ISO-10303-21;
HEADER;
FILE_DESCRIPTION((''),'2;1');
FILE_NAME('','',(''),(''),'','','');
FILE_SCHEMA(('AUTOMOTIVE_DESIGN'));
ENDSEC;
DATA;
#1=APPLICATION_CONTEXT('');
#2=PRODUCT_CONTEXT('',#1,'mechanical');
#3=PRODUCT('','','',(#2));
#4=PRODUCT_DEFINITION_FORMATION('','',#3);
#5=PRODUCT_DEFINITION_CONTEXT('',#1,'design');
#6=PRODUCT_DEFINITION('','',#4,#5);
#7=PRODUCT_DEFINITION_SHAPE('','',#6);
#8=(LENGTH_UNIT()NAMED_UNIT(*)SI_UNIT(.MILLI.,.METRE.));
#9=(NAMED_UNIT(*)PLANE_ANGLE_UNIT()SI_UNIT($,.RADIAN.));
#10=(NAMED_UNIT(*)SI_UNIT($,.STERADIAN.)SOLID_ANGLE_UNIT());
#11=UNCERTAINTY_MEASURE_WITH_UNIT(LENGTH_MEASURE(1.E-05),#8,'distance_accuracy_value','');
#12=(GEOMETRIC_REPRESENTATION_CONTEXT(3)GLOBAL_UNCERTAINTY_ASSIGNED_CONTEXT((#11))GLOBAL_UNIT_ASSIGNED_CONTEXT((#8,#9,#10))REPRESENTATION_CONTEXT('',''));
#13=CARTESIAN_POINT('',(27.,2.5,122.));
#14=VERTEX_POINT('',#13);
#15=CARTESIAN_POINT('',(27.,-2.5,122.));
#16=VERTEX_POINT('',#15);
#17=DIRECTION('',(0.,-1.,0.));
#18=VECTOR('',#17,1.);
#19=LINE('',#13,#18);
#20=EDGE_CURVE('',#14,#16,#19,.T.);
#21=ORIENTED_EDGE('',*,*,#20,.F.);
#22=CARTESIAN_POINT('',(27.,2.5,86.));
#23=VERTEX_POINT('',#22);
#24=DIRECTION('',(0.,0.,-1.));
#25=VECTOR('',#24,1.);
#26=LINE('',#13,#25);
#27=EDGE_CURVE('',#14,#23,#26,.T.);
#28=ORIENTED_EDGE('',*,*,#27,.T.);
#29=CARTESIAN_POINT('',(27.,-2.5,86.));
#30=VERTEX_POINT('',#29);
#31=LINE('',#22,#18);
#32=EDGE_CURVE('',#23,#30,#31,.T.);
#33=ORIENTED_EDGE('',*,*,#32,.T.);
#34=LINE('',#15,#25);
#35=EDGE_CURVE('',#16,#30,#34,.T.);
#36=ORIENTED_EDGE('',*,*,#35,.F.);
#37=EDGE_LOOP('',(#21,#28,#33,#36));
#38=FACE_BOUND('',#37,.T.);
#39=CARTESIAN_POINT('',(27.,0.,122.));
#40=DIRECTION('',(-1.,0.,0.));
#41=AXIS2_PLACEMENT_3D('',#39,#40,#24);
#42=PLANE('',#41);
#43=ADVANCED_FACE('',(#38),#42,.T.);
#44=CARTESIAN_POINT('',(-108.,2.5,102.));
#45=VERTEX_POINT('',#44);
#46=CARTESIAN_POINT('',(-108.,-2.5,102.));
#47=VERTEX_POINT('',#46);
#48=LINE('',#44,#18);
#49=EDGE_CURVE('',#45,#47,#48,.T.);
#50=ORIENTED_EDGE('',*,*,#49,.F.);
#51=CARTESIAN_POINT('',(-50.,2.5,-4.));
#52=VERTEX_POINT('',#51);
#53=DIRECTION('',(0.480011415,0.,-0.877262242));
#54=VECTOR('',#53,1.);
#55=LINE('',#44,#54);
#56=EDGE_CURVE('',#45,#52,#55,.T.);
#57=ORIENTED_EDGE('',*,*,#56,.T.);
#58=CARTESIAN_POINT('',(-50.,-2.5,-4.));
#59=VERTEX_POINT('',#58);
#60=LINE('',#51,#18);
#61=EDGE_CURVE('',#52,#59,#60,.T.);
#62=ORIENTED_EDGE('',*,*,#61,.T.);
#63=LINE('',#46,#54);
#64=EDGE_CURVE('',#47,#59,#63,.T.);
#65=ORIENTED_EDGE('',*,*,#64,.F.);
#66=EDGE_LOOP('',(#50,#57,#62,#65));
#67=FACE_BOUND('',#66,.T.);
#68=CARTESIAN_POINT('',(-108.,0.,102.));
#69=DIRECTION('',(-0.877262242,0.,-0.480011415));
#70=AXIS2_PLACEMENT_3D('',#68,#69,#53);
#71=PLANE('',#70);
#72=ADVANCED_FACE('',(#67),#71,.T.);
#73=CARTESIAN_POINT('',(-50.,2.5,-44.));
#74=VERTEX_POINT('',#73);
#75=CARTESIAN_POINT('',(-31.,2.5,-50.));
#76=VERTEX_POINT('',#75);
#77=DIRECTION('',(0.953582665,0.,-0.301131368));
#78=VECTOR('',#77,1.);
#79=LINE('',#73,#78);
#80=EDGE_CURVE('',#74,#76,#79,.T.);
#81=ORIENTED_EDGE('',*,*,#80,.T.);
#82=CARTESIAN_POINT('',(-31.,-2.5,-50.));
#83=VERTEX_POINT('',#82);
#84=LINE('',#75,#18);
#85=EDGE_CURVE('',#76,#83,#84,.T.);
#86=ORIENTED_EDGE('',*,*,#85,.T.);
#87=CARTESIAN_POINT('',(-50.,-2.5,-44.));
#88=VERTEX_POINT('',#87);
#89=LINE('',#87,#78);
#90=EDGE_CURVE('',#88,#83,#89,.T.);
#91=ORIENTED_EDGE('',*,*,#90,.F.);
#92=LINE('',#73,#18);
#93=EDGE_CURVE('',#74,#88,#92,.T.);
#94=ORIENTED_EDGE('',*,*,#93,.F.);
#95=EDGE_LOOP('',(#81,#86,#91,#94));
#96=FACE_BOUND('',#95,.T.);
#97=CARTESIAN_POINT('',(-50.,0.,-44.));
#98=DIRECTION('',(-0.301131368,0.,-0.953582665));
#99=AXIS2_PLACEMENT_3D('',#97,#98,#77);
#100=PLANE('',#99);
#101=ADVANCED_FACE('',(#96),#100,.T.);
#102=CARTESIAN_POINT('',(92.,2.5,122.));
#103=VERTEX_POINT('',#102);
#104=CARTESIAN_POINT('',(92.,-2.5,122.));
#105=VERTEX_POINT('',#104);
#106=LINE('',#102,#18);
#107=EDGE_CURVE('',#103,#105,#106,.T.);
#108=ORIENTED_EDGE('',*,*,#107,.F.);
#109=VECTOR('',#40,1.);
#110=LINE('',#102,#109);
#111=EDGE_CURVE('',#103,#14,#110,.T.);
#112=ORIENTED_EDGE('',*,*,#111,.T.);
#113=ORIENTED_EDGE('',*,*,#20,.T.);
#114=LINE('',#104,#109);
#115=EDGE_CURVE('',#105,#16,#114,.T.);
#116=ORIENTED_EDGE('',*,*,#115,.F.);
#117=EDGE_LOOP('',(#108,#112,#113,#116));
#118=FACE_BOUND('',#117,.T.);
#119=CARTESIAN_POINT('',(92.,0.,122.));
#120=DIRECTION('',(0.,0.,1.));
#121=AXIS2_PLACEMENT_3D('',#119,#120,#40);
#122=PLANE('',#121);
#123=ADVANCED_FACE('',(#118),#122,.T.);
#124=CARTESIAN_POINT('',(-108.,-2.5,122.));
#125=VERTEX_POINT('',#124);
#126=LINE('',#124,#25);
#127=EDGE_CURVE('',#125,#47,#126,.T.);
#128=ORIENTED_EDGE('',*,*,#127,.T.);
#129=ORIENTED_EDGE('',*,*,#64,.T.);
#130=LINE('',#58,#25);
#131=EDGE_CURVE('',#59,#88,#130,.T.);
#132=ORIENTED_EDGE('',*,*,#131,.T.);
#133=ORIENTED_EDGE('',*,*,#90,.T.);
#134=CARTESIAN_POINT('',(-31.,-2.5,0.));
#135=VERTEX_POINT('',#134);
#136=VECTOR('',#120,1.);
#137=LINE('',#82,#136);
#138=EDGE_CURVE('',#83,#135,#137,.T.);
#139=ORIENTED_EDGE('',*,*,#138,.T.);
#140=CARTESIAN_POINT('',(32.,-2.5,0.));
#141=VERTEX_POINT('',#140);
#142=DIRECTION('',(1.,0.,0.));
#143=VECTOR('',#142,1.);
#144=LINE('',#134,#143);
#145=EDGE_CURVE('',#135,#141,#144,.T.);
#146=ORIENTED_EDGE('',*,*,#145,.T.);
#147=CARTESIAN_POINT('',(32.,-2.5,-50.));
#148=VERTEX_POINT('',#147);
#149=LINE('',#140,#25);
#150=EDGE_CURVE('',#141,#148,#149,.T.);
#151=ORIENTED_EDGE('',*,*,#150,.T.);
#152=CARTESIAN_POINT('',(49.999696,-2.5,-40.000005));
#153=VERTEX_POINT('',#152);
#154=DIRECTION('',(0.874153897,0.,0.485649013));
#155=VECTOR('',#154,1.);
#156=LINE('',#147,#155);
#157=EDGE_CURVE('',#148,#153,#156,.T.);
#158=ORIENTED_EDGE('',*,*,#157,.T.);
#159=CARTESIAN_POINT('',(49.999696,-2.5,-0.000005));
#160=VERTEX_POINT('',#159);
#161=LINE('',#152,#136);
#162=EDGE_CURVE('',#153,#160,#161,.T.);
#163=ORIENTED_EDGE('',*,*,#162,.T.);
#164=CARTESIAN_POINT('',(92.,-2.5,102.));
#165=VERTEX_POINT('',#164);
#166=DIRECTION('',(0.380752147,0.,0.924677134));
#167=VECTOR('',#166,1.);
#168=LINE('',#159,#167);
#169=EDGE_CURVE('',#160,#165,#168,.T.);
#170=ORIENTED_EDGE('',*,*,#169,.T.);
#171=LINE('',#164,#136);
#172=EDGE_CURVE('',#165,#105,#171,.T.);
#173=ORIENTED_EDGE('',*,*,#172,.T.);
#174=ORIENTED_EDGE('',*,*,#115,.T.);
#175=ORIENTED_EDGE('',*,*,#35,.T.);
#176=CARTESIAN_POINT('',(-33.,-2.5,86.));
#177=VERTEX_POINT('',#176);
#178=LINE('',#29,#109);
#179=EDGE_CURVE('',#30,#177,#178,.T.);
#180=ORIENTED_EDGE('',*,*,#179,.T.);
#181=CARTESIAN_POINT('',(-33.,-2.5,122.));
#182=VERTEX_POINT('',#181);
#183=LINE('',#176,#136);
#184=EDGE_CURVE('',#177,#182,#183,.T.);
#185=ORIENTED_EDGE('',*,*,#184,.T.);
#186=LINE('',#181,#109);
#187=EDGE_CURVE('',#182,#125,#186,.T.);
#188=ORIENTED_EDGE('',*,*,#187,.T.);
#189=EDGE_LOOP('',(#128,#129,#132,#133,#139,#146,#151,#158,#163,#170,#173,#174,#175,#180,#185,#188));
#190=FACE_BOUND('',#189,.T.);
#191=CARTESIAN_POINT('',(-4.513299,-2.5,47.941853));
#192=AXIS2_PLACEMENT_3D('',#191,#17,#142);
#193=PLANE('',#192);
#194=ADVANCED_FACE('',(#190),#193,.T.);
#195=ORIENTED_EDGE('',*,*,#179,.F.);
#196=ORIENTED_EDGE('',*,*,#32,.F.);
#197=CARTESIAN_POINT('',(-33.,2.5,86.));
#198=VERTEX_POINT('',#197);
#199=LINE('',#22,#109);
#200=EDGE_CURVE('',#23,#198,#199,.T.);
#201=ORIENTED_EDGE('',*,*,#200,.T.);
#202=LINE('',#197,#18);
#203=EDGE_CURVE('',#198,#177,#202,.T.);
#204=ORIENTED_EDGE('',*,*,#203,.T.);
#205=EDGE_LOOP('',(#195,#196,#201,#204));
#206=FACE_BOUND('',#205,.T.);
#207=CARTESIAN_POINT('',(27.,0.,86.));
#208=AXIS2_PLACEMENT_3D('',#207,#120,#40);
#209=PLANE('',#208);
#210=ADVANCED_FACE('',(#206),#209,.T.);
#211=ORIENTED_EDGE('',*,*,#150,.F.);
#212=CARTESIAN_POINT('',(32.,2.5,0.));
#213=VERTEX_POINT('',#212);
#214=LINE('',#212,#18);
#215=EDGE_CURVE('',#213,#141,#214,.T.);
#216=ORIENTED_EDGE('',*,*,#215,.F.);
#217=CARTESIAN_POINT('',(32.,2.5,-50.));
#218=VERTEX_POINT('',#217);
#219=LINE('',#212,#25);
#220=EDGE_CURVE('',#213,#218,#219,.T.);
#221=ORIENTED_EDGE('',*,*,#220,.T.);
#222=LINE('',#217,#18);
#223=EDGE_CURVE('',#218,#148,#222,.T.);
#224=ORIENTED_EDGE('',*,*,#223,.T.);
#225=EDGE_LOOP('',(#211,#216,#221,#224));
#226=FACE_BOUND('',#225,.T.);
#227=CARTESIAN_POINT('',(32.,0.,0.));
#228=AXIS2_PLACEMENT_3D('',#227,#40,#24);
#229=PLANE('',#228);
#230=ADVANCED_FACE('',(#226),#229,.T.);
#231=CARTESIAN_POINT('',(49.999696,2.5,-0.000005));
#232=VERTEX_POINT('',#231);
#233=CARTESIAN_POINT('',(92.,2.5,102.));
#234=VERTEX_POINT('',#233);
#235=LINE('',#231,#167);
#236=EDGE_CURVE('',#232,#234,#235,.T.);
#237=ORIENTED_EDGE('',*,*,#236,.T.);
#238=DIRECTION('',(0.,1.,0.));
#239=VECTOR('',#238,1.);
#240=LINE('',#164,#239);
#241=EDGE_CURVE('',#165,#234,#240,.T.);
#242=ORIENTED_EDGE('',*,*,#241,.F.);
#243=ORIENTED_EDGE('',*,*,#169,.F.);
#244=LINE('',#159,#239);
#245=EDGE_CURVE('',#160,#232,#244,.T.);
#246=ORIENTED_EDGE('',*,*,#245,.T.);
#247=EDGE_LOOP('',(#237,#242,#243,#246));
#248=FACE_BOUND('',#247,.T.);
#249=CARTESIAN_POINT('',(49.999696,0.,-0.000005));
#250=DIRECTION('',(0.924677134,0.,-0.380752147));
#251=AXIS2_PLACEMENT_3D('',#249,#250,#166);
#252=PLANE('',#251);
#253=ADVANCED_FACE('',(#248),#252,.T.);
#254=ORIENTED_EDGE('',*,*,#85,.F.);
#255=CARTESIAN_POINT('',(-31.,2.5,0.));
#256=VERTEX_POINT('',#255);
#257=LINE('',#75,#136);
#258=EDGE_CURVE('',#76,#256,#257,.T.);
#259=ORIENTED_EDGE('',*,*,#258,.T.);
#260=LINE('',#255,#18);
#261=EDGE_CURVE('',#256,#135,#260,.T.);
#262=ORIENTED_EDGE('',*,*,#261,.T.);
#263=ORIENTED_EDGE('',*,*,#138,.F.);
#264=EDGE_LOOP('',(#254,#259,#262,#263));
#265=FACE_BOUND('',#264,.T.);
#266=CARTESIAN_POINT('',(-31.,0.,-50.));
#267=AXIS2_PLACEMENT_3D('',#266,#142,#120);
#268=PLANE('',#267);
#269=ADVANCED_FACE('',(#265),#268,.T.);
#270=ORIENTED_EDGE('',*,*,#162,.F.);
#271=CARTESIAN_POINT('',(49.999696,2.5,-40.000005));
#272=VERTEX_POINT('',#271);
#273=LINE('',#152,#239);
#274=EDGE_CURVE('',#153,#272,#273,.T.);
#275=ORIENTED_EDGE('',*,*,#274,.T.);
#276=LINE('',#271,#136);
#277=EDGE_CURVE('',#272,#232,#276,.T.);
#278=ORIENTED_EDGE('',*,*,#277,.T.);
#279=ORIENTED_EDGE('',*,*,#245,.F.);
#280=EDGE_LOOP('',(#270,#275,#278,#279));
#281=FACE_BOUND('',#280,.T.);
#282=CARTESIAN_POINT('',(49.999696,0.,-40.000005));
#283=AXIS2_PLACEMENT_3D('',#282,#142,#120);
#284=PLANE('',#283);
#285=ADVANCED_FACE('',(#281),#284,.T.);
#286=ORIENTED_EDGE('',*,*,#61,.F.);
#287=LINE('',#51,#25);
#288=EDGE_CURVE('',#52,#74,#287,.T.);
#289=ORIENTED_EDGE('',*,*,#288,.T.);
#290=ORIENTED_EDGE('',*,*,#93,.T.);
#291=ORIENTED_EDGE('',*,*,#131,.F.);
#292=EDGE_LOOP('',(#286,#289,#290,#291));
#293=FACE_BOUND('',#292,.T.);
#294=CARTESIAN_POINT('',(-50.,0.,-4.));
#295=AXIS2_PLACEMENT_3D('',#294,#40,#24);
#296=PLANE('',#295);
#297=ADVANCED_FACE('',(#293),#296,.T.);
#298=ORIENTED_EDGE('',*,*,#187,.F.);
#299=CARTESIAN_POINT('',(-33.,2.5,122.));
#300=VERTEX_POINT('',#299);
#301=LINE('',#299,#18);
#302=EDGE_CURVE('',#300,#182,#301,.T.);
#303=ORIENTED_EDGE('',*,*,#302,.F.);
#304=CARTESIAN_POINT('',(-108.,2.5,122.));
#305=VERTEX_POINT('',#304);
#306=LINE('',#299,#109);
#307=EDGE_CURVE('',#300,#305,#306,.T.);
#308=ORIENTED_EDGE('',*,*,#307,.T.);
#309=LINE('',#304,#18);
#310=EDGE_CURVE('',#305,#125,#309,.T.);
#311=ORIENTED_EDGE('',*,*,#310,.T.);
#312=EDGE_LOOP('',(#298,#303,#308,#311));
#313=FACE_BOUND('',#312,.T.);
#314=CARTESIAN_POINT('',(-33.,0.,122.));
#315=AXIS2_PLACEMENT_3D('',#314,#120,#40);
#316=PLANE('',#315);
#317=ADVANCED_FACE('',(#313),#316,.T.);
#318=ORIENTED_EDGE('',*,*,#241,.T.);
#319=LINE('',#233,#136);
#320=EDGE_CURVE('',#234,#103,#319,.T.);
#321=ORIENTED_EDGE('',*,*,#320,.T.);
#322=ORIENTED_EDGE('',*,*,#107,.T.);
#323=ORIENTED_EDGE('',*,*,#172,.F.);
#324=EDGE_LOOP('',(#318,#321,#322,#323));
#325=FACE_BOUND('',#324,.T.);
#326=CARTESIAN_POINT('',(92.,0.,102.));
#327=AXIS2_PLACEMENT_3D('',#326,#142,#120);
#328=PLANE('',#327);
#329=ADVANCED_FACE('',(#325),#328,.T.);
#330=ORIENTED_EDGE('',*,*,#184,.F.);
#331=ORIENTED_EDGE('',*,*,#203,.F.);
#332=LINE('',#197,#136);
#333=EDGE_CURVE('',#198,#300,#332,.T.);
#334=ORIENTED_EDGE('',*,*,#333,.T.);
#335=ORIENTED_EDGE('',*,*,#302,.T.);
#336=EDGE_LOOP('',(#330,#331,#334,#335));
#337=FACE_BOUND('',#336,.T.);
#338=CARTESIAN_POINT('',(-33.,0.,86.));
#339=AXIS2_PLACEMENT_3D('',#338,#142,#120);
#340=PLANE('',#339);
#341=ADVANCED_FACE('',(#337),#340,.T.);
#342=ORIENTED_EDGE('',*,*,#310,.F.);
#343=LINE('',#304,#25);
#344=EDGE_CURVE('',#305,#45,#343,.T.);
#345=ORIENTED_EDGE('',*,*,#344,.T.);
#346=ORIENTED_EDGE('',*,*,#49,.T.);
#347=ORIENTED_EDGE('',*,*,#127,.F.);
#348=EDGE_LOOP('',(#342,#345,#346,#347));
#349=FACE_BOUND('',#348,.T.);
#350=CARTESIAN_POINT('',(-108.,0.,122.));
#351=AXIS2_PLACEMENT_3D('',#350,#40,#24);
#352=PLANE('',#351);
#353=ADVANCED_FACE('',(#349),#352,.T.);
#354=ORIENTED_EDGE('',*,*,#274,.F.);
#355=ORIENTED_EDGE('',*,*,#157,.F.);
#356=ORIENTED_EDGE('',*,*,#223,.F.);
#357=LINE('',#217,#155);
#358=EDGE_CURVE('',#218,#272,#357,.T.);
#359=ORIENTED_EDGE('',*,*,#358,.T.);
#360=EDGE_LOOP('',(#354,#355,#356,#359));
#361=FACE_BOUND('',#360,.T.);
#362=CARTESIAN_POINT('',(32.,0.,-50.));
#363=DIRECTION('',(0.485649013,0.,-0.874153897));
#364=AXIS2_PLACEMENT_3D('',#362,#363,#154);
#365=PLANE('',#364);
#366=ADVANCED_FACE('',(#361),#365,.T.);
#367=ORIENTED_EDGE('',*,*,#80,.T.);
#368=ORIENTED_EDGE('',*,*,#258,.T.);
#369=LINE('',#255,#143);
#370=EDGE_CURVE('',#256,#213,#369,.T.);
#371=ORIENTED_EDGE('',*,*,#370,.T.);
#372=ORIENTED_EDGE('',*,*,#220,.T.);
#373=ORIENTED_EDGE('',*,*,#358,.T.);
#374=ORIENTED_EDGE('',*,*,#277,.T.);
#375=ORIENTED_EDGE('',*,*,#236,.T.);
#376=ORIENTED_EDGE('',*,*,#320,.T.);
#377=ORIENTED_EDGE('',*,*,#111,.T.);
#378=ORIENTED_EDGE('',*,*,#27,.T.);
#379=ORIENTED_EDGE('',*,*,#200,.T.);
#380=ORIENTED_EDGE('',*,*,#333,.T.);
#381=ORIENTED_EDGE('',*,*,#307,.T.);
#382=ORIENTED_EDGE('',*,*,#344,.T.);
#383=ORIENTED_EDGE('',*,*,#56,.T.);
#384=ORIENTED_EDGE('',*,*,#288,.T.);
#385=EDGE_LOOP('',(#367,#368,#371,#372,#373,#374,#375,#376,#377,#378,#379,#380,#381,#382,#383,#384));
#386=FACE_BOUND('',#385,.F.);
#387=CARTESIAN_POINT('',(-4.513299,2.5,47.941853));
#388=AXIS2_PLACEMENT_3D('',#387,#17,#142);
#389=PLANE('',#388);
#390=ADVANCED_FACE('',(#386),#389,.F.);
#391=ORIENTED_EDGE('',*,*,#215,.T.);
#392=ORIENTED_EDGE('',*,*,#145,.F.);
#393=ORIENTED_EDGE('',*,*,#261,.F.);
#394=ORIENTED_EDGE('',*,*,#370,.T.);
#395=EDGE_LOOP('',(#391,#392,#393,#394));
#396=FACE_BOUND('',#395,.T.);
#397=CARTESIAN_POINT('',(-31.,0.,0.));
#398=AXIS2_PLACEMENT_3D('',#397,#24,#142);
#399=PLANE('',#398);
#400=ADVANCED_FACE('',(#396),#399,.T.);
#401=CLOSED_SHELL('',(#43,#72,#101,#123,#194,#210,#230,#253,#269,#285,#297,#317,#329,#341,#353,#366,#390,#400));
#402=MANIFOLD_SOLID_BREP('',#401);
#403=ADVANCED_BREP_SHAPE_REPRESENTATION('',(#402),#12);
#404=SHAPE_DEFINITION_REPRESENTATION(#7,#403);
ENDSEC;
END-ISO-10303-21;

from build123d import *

# Parameters (mm, degrees)
F1_DEPTH = 2.5


# Not quite as in the source:
# - a feature names something its author has since deleted; it is built from what else it names


with BuildPart() as f1:
    # F0 (on Front) → F1 (new body, symmetric)
    with BuildSketch(Plane.XZ):
        Polygon((92, 102), (92, 122), (27, 122), (27, 86), (-33, 86), (-33, 122), (-108, 122), (-108, 102), (-50, -4), (-50, -44), (-31, -50), (-31, 0), (0, 0), (32, 0), (32, -50), (49.9996958359, -40.0000051003), (49.9996958359, -5.1003e-06), align=None)
    extrude(amount=F1_DEPTH, both=True)


solid = f1.part
